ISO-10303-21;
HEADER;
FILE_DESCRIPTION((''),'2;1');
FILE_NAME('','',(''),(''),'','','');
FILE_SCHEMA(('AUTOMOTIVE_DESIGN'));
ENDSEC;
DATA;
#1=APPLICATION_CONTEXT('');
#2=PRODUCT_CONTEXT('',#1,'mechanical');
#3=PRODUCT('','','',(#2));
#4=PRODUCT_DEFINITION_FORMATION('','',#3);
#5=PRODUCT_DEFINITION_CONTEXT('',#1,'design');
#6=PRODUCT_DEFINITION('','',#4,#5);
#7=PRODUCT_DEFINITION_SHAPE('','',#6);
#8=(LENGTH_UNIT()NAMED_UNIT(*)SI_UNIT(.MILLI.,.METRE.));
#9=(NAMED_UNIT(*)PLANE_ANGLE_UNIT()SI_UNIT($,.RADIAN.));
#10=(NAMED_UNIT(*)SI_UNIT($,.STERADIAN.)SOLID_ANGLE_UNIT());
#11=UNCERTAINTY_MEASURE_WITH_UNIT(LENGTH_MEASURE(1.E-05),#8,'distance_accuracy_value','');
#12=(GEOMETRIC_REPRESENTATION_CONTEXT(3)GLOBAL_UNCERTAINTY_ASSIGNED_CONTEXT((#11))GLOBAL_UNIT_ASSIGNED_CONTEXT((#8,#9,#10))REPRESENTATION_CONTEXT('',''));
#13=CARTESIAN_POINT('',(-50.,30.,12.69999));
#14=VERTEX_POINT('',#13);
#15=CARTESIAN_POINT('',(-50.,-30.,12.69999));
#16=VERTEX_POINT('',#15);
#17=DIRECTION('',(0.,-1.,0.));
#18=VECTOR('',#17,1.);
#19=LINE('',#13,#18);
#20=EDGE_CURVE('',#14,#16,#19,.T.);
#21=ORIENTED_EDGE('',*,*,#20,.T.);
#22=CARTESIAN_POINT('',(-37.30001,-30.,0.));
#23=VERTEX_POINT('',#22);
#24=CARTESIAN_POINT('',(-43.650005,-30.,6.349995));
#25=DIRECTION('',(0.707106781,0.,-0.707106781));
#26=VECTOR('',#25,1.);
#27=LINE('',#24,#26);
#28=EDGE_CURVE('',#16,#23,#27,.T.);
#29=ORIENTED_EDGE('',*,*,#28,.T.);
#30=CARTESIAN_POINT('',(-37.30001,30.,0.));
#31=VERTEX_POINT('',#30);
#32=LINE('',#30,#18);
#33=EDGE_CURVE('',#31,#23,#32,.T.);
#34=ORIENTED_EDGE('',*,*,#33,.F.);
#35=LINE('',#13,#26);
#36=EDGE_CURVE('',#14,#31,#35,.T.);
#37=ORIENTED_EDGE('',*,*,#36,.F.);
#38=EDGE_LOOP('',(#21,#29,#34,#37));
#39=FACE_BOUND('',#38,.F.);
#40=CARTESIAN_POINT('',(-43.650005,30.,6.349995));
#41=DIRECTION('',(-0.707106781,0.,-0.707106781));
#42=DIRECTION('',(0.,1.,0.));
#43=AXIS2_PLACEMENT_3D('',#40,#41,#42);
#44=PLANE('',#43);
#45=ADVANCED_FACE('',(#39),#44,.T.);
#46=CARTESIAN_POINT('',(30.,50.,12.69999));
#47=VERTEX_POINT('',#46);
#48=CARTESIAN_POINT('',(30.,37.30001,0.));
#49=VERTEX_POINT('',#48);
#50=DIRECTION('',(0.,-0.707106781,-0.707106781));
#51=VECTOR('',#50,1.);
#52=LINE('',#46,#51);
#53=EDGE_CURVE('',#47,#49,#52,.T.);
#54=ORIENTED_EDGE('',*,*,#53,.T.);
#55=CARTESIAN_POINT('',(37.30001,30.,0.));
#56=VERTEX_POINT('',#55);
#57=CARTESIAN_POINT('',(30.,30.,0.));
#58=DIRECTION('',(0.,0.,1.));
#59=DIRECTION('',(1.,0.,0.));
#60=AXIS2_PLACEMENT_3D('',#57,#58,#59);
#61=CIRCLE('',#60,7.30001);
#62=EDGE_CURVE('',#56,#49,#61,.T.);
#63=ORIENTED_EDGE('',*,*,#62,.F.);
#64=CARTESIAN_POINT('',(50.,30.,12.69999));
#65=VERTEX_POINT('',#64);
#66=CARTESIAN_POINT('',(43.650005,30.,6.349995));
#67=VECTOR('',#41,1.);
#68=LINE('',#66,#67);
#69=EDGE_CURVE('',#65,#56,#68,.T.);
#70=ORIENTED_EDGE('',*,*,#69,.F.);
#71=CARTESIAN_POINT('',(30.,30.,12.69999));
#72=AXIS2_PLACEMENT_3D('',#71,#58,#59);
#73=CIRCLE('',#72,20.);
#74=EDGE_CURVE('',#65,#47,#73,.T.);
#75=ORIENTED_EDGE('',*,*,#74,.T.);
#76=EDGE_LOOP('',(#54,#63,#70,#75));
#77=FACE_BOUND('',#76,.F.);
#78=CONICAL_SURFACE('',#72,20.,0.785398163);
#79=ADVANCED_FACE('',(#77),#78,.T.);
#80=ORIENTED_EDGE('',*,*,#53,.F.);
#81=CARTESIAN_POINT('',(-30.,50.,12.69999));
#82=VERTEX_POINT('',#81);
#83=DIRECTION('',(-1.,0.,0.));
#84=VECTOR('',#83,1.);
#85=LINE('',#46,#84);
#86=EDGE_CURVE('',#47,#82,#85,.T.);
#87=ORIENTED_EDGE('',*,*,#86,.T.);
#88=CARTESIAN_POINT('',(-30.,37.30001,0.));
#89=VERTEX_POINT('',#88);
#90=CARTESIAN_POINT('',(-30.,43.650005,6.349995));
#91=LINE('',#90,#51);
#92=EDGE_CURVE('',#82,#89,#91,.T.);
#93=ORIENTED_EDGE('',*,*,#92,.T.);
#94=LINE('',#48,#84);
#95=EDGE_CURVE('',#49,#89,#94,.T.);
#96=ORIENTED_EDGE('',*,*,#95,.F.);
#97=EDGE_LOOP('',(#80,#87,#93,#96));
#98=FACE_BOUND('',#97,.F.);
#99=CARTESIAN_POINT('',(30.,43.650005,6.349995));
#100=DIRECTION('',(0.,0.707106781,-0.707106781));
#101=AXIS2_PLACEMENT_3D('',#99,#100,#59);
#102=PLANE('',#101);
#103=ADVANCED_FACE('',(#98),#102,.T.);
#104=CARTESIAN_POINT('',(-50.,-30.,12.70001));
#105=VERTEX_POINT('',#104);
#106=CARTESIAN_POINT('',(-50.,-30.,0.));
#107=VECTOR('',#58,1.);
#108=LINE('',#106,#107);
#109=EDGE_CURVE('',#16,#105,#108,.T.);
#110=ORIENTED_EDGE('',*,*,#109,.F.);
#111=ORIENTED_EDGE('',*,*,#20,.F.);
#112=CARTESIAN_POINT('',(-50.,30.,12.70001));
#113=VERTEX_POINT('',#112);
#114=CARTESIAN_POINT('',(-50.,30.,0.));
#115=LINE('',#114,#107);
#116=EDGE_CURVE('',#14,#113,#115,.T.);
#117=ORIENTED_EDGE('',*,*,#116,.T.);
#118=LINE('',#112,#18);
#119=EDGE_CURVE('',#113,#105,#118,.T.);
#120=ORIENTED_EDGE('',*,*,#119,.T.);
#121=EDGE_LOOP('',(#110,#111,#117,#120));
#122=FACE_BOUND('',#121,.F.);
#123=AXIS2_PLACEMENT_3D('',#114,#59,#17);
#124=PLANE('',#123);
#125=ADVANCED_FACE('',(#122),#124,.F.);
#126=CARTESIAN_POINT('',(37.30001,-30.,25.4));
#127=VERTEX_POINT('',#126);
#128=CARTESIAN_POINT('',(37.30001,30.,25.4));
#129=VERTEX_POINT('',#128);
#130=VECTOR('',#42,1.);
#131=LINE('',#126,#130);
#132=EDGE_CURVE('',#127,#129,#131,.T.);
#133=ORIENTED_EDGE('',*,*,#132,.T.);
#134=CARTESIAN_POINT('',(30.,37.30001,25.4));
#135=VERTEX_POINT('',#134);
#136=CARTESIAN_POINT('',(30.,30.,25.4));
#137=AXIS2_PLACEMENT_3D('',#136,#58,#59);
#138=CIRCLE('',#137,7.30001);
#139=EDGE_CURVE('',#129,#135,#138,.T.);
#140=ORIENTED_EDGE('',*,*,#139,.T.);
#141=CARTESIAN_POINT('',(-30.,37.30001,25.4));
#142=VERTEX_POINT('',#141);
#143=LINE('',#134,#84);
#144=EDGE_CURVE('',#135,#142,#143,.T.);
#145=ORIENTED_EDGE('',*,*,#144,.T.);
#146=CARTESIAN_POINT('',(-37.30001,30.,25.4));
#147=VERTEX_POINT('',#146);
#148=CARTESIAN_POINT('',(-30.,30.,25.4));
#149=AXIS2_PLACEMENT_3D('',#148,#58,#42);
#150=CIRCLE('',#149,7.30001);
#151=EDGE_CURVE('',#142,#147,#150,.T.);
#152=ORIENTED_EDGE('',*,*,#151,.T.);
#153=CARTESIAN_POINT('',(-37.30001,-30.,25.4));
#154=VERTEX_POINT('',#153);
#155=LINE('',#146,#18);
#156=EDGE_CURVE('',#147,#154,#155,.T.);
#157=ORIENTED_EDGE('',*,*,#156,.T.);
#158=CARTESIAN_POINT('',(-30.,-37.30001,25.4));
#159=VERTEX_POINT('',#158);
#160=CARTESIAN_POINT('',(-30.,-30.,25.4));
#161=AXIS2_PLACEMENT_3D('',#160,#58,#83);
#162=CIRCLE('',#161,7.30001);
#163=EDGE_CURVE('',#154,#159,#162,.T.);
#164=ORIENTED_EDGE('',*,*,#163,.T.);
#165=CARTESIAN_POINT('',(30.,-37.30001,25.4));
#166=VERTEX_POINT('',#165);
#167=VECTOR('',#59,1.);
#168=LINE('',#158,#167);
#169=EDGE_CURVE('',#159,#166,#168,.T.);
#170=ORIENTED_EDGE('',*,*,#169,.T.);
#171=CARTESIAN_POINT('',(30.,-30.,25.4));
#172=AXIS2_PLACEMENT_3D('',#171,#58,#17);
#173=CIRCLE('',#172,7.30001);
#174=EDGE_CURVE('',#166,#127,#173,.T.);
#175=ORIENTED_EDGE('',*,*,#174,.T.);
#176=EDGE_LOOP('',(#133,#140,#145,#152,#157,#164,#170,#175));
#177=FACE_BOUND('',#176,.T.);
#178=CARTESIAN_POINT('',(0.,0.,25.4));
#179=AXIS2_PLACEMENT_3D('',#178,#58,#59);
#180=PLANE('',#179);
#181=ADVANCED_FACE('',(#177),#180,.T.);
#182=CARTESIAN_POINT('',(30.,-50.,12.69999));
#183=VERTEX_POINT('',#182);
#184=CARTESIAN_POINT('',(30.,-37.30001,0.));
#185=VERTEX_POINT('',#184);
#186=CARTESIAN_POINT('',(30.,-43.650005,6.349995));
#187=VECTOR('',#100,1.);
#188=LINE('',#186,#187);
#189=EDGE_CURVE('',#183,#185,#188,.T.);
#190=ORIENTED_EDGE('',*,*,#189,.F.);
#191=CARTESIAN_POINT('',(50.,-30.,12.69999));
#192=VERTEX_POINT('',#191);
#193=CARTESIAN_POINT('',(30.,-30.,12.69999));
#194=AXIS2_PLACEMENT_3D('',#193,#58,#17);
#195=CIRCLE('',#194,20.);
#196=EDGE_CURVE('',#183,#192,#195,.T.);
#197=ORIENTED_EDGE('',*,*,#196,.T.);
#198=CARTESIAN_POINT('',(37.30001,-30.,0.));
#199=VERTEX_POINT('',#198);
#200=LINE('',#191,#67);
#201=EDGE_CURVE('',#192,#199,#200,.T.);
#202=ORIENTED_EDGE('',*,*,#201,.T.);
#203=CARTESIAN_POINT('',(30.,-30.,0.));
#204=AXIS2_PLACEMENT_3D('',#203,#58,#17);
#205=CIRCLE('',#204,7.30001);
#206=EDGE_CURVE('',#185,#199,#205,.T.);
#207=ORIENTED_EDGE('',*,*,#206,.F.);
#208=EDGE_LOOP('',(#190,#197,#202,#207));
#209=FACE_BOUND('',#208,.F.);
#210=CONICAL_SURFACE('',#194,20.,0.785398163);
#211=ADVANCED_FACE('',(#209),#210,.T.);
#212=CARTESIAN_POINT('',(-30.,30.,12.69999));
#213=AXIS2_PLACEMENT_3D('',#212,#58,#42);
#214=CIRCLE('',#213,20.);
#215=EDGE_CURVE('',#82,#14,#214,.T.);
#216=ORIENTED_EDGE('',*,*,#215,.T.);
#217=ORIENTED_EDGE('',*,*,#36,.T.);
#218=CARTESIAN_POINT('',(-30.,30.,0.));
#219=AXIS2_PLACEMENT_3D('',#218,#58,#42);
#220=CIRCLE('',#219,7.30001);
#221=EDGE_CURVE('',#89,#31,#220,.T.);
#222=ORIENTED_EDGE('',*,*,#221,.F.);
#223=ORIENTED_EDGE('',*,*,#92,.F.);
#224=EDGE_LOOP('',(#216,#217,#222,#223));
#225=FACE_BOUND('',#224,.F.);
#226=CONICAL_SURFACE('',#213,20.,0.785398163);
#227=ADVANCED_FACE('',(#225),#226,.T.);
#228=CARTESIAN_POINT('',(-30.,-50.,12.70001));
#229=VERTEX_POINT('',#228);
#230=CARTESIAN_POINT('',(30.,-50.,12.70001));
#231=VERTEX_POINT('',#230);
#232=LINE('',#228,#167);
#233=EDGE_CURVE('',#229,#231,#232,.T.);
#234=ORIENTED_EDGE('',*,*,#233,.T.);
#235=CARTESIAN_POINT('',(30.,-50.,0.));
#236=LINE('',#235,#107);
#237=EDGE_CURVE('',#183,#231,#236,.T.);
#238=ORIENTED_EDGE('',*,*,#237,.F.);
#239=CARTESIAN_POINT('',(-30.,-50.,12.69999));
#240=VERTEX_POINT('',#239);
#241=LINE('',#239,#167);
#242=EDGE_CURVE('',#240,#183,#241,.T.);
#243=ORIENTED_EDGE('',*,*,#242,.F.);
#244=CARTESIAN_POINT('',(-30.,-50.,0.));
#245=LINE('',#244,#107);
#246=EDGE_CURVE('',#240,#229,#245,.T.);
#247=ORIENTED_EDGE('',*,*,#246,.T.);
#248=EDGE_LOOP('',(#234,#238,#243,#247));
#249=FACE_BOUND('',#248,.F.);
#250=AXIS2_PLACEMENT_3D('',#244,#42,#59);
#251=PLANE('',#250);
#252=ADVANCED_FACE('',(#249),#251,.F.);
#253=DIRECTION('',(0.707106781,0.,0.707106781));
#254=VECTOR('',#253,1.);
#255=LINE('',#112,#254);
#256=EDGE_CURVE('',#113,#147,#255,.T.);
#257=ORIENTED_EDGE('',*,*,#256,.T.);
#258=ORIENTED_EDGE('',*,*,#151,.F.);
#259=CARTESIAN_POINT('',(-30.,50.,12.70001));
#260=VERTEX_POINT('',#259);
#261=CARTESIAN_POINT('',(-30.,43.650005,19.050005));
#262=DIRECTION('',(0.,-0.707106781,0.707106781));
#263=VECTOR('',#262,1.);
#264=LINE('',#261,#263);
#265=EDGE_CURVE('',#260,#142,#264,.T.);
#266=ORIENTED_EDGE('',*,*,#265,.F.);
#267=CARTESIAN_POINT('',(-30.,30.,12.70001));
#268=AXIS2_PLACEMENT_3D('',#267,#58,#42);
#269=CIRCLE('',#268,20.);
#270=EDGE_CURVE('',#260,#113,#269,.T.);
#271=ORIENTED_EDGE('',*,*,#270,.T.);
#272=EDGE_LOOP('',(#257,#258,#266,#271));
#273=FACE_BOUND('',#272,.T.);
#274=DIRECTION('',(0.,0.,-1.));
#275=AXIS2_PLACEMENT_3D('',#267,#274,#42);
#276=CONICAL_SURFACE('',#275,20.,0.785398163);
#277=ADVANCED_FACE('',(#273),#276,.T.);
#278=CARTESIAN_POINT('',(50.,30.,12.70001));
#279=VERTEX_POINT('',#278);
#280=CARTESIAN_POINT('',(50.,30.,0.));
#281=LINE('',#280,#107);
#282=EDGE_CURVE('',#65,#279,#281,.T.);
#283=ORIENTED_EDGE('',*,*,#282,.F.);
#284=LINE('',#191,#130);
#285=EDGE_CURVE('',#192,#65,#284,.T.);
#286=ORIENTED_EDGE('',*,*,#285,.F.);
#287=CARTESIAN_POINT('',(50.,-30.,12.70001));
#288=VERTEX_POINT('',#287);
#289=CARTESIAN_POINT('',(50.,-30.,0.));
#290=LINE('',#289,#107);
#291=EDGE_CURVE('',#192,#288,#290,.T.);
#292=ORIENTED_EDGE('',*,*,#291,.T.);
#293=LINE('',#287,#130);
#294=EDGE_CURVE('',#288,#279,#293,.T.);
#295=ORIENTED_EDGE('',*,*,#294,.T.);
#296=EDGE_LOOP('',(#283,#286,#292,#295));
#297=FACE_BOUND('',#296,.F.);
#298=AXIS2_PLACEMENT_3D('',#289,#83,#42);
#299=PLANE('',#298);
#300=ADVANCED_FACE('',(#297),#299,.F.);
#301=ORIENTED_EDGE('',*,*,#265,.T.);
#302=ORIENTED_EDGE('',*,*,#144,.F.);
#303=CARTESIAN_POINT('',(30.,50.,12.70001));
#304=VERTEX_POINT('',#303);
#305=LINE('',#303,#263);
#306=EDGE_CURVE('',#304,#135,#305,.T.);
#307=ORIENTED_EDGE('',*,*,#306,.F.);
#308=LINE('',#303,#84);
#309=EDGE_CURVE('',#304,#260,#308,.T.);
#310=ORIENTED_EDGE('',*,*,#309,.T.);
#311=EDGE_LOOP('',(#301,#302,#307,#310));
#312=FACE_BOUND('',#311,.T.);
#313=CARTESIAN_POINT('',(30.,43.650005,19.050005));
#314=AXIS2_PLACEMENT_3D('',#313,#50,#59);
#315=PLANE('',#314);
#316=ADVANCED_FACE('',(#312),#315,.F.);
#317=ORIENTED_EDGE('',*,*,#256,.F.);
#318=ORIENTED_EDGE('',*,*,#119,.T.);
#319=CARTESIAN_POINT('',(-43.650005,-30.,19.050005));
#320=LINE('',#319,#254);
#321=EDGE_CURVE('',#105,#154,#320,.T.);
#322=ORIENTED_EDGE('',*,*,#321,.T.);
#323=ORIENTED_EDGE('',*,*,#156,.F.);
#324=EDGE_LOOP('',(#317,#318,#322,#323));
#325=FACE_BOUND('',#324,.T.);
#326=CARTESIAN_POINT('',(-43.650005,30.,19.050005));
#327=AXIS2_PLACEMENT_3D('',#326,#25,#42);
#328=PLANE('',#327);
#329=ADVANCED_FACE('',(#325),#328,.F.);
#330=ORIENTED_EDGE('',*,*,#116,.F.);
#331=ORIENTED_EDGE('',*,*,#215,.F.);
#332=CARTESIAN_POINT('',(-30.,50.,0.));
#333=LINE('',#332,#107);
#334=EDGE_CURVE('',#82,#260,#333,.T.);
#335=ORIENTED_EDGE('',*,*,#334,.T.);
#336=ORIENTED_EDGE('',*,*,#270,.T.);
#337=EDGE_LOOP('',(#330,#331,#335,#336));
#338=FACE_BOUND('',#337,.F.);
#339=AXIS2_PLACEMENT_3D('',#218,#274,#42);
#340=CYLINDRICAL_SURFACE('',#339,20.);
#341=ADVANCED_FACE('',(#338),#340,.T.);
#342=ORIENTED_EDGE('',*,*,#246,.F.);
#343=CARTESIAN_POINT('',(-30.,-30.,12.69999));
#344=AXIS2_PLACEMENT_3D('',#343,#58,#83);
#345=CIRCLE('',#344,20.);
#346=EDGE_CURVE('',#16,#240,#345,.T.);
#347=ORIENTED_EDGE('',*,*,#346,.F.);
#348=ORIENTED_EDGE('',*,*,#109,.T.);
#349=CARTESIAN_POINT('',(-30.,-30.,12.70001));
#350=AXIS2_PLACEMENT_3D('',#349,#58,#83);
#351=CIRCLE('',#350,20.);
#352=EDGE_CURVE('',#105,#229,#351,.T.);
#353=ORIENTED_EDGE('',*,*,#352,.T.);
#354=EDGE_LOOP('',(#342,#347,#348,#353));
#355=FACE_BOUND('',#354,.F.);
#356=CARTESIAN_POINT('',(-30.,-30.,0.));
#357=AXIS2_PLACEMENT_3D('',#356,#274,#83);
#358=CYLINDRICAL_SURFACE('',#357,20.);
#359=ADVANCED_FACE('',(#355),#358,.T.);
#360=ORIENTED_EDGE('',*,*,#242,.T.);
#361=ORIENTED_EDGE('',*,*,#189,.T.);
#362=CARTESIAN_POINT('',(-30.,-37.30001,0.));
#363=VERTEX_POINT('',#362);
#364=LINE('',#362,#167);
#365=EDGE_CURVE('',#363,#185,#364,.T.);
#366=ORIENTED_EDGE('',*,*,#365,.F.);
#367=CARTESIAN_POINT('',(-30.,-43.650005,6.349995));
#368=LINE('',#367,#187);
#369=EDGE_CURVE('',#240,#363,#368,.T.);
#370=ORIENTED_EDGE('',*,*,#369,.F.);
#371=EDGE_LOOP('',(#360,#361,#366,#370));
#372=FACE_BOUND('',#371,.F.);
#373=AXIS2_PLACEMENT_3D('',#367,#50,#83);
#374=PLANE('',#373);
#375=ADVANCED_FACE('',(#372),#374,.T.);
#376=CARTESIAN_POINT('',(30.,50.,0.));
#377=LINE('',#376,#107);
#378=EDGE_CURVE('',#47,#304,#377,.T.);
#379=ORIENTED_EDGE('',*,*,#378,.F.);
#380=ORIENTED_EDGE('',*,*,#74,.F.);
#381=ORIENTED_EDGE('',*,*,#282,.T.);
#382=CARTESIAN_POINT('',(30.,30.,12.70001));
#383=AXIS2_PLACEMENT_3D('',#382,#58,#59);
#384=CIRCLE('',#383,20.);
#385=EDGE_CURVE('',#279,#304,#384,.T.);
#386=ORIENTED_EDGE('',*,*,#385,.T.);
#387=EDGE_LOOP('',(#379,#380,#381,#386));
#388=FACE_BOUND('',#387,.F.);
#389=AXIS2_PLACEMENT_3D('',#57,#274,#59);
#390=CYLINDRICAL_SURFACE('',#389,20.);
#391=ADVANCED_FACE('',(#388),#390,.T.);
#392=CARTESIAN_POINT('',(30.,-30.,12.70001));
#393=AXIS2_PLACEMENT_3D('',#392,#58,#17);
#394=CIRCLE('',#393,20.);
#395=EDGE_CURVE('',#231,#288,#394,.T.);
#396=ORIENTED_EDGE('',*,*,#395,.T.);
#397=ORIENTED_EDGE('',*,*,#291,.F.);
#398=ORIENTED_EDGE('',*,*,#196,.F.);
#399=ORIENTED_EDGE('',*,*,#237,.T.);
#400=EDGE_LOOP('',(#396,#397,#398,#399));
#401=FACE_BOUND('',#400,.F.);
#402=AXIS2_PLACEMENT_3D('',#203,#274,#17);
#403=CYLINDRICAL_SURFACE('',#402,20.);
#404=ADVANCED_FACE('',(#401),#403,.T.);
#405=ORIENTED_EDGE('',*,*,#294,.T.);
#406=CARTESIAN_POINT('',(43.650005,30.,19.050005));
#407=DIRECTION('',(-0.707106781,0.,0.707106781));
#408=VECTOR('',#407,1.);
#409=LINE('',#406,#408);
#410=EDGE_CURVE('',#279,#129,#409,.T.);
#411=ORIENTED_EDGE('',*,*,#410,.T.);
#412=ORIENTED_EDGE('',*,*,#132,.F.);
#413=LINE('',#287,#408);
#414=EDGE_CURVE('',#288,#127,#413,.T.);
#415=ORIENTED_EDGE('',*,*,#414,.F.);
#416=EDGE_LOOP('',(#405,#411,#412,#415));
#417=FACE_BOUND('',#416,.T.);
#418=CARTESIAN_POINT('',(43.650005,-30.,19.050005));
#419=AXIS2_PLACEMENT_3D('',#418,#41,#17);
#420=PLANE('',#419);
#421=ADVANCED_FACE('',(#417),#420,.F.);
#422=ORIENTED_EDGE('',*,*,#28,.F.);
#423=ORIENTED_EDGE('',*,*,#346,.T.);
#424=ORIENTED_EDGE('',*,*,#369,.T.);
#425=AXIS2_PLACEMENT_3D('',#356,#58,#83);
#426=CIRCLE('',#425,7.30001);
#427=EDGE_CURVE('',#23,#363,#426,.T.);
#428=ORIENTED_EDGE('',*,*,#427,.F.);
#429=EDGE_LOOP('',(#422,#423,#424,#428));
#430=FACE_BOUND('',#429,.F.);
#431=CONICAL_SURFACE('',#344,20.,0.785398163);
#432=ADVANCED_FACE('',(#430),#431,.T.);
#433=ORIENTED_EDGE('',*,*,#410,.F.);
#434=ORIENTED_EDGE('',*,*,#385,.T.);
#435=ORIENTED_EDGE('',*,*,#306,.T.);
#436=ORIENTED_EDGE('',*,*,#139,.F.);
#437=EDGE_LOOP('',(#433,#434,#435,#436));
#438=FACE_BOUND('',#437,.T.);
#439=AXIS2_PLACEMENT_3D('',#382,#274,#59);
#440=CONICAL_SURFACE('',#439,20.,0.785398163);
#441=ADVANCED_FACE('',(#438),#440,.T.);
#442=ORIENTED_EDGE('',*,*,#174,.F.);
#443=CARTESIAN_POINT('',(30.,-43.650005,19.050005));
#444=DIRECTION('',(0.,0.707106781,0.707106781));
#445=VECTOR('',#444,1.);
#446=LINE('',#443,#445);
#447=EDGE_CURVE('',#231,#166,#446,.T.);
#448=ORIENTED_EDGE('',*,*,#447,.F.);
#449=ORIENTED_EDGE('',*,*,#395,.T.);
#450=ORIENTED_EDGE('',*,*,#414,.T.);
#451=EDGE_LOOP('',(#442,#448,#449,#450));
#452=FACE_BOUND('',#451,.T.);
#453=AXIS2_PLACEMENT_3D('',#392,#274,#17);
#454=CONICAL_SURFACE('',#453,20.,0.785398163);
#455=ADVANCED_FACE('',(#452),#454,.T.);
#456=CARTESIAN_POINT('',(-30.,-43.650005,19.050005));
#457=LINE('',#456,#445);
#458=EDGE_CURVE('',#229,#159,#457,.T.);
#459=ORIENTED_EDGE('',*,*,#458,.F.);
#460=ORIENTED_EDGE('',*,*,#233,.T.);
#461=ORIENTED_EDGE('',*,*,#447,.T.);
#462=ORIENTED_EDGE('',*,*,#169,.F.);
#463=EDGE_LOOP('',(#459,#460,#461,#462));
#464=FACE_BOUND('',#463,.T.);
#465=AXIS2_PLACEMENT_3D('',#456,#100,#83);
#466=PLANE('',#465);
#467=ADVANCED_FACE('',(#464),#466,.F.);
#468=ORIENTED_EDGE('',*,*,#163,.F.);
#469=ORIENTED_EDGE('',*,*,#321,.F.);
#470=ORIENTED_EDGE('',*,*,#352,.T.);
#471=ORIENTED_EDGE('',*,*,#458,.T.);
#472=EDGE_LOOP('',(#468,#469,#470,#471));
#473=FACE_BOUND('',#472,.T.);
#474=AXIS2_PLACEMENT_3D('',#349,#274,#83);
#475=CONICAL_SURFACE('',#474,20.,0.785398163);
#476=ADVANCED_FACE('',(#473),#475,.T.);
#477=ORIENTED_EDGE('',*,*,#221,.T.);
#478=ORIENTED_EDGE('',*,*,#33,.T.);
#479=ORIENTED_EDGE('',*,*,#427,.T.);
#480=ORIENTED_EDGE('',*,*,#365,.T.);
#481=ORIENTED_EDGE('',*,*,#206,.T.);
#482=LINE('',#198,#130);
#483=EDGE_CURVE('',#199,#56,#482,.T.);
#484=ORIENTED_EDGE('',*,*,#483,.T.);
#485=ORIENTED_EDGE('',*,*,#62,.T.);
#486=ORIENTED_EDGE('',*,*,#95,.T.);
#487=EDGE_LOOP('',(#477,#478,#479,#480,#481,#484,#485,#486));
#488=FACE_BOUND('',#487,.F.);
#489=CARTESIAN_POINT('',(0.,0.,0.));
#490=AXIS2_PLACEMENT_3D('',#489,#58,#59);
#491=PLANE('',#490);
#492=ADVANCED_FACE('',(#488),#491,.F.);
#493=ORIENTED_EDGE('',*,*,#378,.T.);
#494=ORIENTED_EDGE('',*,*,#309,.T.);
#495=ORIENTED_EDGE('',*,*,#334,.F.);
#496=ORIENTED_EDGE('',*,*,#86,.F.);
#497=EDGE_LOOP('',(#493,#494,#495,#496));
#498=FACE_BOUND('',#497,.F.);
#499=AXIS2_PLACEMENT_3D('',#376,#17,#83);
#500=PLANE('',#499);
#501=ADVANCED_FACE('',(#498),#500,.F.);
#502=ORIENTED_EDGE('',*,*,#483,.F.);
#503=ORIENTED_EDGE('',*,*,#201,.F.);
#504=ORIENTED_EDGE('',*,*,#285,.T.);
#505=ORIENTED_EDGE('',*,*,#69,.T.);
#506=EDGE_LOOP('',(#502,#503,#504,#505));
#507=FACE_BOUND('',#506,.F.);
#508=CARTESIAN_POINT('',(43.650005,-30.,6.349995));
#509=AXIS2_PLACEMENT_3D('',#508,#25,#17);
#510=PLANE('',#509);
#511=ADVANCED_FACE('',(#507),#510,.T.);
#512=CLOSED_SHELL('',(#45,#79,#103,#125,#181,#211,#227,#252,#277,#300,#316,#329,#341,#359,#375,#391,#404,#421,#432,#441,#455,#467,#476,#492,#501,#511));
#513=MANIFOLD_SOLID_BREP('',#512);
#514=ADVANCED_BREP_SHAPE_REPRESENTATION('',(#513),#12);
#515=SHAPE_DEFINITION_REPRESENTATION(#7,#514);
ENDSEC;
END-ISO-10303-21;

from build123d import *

# Parameters (mm, degrees)
F1_DEPTH = 25.4
F2_SIZE  = 12.69999


# Not quite as in the source:
# - a fillet or chamfer is up to 0.001 mm smaller than in the source, because OpenCascade refuses the exact size
# - a feature names something its author has since deleted; it is built from what else it names


with BuildPart() as f1:
    # F0 (on Top) → F1 (new body)
    with BuildSketch(Plane.XY):
        with BuildLine():
            Line((-30, -50), (30, -50))
            ThreePointArc((30, -50), (44.1421356237, -44.1421356237), (50, -30))
            Line((50, -30), (50, 30))
            ThreePointArc((50, 30), (44.1421356237, 44.1421356237), (30, 50))
            Line((30, 50), (-30, 50))
            ThreePointArc((-30, 50), (-44.1421356237, 44.1421356237), (-50, 30))
            Line((-50, 30), (-50, -30))
            ThreePointArc((-50, -30), (-44.1421356237, -44.1421356237), (-30, -50))
        make_face()
    extrude(amount=F1_DEPTH)

    # F2 (size 12.7 in the source; OpenCascade refuses exactly that, so slightly less here)
    f2_edges = [f1.edges().sort_by_distance(p)[0] for p in [
        (0, -50, 0),
        (44.142136, -44.142136, 0),
        (50, 0, 0),
        (44.142136, 44.142136, 0),
        (0, 50, 0),
        (-44.142136, 44.142136, 0),
        (-50, 0, 0),
        (-44.142136, -44.142136, 0),
        (0, -50, 25.4),
        (44.142136, -44.142136, 25.4),
        (50, 0, 25.4),
        (44.142136, 44.142136, 25.4),
        (0, 50, 25.4),
        (-44.142136, 44.142136, 25.4),
        (-50, 0, 25.4),
        (-44.142136, -44.142136, 25.4),
    ]]
    chamfer(f2_edges, length=F2_SIZE)


solid = f1.part
